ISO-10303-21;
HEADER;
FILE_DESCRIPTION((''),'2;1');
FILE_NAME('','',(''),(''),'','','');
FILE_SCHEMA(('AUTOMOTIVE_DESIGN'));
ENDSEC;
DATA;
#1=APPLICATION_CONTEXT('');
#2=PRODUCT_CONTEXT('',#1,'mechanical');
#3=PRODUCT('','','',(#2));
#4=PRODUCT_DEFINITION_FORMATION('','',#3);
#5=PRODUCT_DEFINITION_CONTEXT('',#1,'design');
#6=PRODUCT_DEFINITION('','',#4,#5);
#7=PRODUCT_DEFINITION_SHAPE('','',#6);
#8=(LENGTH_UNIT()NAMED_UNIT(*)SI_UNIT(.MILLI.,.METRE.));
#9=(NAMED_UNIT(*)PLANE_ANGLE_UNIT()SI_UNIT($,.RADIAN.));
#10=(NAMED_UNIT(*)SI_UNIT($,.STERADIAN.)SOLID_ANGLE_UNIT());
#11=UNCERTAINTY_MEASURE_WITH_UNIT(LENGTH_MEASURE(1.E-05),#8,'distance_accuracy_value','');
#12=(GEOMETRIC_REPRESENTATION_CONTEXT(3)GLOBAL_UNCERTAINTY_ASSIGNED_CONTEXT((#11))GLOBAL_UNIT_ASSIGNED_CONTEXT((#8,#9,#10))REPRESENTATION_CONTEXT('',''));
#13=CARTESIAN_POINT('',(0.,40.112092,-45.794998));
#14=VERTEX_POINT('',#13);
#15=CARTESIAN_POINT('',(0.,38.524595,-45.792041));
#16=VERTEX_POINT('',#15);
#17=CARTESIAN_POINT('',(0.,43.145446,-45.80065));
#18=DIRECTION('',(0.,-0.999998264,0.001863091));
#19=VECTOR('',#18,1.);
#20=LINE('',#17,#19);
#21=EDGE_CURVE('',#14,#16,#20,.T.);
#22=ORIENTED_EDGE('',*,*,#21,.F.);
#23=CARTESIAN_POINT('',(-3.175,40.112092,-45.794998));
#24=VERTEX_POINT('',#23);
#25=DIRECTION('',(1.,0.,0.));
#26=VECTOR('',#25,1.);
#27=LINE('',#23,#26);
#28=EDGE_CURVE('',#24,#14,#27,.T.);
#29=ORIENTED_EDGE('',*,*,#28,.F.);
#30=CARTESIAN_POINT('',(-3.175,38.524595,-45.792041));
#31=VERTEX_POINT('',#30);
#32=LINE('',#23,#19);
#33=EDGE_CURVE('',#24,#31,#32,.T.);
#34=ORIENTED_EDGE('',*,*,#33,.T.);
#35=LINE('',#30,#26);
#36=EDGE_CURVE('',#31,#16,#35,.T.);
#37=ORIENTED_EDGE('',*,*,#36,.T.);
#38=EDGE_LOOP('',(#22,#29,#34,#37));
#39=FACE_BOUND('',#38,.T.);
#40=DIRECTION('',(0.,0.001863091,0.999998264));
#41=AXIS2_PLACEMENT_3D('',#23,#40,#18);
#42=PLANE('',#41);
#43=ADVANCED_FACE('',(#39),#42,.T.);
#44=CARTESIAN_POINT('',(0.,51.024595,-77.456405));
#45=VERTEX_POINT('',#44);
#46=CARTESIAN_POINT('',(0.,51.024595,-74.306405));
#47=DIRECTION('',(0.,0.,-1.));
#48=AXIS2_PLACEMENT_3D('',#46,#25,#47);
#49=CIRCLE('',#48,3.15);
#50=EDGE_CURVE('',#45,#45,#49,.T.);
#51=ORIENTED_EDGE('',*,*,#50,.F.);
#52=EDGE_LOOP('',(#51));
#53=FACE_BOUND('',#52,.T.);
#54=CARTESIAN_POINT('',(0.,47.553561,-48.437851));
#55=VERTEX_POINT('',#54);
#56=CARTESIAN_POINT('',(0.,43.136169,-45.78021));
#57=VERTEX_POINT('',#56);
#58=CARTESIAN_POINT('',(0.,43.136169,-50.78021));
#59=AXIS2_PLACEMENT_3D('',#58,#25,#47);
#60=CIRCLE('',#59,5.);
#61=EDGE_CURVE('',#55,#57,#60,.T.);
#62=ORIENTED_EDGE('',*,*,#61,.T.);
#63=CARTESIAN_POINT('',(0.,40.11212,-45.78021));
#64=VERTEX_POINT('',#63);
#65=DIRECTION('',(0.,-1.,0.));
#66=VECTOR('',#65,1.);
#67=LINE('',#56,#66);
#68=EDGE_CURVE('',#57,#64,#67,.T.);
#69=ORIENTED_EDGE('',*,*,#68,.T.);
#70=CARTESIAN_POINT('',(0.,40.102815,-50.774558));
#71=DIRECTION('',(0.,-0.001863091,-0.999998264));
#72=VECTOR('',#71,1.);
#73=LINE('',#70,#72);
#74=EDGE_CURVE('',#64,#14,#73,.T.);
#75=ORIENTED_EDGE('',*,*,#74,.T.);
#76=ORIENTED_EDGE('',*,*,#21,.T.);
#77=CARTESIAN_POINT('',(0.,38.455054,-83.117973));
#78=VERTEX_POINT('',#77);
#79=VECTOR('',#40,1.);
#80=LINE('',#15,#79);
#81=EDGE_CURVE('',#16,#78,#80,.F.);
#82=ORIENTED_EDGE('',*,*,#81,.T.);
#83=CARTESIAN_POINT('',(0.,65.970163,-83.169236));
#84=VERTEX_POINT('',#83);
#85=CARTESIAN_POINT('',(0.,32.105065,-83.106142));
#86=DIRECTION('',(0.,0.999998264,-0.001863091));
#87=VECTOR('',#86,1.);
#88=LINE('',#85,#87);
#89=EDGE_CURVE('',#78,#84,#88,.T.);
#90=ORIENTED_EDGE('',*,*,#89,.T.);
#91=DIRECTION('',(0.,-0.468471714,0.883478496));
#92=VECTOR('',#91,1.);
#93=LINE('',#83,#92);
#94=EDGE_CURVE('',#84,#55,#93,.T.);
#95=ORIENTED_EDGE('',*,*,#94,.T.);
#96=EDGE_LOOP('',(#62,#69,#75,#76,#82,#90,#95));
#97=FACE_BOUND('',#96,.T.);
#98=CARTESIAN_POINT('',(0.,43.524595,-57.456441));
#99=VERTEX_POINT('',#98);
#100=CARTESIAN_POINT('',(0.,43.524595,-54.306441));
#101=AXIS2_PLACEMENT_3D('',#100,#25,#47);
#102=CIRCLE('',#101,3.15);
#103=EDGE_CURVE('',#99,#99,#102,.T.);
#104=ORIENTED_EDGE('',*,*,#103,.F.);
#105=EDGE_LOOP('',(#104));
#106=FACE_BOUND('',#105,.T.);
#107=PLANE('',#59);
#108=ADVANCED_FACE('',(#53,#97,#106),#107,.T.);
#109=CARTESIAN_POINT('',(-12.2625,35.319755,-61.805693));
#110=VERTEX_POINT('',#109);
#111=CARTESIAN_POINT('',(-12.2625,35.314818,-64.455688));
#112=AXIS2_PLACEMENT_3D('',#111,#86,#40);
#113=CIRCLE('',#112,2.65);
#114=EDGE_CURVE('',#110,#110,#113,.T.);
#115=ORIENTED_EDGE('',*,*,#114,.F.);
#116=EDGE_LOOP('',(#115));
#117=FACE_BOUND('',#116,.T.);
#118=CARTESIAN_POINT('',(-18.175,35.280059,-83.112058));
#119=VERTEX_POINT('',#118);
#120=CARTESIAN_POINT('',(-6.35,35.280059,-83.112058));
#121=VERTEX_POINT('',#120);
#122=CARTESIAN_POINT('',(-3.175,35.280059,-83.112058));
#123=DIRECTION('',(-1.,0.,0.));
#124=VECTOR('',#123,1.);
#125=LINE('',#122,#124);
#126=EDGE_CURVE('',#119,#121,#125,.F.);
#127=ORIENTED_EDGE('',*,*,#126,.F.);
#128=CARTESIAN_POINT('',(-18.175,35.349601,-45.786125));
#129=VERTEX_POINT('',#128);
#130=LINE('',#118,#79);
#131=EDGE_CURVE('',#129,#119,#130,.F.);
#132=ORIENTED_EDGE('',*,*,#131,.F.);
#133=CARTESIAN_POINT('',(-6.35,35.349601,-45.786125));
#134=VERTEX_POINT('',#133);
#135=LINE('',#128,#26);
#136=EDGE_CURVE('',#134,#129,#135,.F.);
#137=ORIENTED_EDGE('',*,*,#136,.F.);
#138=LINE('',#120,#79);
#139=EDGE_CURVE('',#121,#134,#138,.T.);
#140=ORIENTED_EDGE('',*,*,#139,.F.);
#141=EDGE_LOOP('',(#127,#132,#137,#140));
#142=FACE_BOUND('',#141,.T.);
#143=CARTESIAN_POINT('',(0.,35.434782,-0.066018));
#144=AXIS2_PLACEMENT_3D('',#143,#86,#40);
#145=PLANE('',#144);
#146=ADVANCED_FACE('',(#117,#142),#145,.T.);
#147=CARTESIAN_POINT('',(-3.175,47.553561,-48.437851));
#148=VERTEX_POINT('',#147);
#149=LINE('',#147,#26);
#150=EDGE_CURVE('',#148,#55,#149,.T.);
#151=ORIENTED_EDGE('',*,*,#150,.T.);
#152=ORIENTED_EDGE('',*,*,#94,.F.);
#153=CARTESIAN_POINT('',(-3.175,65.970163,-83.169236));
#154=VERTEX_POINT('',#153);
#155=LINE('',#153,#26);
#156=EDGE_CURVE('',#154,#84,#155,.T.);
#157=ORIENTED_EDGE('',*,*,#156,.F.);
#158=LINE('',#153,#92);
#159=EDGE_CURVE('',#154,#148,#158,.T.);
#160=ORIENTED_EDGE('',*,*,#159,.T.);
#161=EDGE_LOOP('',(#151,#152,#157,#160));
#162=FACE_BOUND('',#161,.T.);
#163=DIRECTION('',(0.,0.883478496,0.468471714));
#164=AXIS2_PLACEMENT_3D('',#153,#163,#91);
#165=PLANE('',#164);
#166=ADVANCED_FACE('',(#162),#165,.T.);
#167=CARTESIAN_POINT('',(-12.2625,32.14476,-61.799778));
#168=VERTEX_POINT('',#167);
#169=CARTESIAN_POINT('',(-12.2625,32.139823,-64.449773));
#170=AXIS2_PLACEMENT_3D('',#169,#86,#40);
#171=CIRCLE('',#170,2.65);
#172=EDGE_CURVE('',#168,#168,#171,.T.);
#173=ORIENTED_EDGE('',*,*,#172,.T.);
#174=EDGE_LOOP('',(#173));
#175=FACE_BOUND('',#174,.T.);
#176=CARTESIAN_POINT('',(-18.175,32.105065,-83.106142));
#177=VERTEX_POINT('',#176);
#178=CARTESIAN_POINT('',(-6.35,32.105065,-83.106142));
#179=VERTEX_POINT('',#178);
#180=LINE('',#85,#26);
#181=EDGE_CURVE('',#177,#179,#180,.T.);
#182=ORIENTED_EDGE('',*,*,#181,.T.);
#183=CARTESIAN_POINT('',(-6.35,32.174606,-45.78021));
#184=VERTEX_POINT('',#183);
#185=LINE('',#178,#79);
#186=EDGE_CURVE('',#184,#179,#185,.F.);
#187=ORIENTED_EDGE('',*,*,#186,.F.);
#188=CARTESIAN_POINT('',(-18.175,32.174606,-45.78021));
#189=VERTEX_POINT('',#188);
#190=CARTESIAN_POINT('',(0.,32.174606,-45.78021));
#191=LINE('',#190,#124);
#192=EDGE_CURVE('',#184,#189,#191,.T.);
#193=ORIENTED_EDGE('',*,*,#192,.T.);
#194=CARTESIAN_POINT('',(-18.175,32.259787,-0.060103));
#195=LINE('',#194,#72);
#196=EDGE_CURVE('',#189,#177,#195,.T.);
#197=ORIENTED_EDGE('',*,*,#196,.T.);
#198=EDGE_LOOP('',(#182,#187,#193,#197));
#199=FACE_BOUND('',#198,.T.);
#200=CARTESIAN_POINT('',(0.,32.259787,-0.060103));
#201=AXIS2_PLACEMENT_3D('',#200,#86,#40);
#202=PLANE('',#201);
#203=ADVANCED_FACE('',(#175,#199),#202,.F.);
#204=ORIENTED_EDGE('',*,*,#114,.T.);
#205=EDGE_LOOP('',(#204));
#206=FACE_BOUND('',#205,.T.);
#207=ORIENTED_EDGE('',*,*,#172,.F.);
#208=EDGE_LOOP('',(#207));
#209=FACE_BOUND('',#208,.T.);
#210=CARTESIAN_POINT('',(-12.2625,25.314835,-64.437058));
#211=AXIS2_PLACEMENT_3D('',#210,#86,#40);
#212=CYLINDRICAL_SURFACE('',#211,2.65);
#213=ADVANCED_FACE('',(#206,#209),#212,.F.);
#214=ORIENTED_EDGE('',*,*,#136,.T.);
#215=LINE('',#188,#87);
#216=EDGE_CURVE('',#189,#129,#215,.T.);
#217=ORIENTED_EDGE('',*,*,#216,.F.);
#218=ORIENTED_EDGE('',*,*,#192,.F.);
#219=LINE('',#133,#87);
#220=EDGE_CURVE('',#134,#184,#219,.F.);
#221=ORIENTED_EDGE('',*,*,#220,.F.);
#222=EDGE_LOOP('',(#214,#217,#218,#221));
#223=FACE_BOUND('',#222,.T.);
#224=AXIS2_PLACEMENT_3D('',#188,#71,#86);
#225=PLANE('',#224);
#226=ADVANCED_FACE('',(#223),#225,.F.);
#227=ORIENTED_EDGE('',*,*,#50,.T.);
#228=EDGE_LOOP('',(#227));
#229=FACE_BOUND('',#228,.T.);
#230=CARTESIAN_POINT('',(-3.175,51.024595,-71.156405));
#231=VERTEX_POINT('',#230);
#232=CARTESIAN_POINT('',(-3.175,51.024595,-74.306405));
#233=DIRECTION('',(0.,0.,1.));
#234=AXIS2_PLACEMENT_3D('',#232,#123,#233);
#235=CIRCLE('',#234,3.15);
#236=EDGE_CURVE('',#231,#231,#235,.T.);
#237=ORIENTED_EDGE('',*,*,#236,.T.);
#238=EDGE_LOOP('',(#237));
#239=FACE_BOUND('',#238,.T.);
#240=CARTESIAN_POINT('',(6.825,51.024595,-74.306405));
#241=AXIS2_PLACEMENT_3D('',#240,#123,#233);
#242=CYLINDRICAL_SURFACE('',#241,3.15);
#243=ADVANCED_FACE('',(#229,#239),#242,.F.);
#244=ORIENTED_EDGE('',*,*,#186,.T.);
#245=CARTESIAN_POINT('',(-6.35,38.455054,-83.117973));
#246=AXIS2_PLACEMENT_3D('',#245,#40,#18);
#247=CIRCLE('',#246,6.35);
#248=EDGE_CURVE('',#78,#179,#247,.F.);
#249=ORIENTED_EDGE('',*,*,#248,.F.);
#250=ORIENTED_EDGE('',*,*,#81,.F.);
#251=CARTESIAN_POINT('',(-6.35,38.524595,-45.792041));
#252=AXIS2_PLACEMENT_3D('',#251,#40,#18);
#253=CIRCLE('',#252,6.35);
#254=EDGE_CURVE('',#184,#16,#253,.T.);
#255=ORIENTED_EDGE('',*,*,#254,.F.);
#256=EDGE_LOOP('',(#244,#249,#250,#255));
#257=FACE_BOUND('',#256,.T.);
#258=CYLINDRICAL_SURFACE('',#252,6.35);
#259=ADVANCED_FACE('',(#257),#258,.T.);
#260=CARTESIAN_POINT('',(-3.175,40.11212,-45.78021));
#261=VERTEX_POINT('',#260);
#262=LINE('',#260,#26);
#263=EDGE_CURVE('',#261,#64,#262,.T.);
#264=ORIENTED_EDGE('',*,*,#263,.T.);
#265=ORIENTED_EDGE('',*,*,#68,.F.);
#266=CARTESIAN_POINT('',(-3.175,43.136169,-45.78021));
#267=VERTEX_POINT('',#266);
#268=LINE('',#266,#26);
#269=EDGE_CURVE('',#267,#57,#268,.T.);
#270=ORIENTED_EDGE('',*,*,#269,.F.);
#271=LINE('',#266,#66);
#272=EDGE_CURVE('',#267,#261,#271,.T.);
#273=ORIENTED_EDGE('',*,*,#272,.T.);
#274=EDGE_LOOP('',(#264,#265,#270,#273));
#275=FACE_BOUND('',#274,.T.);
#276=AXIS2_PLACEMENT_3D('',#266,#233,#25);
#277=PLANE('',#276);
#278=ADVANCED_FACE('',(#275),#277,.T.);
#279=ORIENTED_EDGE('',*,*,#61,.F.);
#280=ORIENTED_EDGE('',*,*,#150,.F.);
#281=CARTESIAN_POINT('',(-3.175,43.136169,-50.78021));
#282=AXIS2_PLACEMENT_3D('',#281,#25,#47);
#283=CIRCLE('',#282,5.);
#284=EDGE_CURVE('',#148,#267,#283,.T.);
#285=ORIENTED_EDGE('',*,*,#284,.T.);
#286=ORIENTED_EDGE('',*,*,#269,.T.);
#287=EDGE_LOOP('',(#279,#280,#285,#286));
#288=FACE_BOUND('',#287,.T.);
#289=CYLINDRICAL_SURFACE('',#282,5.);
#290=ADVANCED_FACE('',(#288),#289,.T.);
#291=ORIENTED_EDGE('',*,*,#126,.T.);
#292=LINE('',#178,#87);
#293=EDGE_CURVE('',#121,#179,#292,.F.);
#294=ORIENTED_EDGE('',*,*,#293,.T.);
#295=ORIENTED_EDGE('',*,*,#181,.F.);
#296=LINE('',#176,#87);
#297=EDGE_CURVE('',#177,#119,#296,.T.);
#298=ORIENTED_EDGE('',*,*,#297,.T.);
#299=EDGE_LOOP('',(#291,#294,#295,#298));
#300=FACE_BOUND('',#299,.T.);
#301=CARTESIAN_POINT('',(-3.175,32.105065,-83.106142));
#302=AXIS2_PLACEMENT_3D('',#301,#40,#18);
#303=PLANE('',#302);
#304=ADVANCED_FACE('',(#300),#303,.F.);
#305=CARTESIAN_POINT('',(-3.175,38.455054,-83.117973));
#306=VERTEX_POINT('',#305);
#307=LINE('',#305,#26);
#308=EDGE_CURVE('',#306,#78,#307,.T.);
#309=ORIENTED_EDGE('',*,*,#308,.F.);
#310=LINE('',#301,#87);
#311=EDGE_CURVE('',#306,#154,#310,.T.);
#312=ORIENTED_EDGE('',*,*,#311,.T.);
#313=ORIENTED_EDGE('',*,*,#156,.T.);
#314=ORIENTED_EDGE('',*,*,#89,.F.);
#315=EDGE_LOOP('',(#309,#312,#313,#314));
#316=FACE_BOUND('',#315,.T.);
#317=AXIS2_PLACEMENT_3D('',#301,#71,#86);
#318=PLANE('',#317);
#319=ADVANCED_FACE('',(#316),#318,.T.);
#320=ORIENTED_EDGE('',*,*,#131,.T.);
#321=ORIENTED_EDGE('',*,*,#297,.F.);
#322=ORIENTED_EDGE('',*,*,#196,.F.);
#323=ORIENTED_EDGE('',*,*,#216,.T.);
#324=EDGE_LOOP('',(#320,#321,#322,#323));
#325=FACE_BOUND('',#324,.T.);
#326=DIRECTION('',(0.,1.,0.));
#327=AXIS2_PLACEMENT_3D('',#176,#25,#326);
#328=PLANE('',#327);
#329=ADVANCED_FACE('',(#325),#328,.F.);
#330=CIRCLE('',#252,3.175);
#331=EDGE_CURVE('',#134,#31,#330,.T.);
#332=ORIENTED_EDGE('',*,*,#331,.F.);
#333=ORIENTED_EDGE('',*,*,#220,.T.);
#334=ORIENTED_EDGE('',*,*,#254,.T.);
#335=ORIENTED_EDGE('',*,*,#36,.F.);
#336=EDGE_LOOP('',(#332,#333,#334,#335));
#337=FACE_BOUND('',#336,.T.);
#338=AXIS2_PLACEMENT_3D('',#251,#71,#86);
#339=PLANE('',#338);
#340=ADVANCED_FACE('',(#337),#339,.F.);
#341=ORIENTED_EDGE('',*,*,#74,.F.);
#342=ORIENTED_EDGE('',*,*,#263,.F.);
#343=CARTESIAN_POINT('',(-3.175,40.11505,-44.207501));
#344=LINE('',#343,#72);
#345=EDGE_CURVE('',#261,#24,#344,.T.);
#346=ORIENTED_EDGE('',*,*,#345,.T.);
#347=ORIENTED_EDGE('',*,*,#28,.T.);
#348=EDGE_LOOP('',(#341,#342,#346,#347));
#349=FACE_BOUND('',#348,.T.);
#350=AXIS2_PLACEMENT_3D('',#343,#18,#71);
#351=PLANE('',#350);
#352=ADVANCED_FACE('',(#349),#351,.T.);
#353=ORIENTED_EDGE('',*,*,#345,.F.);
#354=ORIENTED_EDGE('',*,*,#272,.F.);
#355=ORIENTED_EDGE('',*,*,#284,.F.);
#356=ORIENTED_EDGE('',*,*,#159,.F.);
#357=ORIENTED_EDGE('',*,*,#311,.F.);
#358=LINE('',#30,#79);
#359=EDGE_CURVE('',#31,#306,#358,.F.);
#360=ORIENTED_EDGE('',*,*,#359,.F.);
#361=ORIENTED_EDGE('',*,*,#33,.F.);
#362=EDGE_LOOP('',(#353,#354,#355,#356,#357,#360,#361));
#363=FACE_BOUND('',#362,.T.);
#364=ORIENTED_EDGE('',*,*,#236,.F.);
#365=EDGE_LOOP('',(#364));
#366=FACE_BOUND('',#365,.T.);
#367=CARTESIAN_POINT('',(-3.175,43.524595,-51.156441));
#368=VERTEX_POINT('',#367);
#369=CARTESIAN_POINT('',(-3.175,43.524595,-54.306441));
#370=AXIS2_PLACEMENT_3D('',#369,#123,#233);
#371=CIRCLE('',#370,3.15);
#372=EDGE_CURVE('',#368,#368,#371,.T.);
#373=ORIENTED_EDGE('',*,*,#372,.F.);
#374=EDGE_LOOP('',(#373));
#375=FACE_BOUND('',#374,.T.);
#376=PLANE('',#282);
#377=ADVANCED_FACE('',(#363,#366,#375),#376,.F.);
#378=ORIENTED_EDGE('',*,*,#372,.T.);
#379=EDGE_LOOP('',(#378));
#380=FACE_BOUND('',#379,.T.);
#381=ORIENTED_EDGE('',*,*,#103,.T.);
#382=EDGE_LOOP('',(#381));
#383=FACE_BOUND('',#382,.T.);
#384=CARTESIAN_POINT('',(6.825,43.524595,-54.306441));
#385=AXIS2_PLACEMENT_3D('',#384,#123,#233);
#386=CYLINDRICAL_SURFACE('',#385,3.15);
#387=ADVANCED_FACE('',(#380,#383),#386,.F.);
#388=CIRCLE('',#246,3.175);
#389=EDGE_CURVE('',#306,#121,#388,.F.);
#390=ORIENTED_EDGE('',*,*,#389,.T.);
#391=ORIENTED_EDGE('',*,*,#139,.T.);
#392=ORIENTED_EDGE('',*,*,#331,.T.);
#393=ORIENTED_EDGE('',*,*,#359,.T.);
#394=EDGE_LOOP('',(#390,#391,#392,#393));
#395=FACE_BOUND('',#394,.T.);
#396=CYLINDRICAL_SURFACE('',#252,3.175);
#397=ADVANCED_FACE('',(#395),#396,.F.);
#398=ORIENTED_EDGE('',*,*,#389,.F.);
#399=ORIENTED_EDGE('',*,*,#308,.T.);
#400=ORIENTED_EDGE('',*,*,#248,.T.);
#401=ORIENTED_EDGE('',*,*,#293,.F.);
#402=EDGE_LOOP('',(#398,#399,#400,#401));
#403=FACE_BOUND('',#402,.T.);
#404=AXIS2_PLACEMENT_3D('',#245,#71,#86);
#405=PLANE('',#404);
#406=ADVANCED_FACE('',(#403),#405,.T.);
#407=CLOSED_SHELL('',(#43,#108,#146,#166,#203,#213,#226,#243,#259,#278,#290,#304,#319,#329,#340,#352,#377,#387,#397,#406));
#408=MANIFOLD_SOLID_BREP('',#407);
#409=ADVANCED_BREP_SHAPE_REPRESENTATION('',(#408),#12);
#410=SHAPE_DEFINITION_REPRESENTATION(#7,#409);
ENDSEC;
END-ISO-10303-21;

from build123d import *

# Parameters (mm, degrees)
BASE_FLANGE1_DEPTH            = 3.175
EDGE_FLANGE1_STRIP_W          = 19.05
EDGE_FLANGE1_STRIP_H          = 3.175
EDGE_FLANGE1_STRIP_CUT_DEPTH  = 37.325997284
EDGE_FLANGE1_RELIEF_W         = 20.6375
EDGE_FLANGE1_RELIEF_H         = 1.5875
EDGE_FLANGE1_RELIEF_CUT_DEPTH = 3.175
EDGE_FLANGE1_DEPTH            = 37.325997284
SKETCH15_R                    = 2.65
CUT_EXTRUDE2_DEPTH            = 10
SKETCH19_R                    = 3.15
CUT_EXTRUDE4_DEPTH            = 10


# Sheet-metal steps are written as plain solids
with BuildPart() as part:
    # Sketch3 → Base-Flange1 (new body)
    with BuildSketch(Plane(origin=(0, 0, 0), x_dir=(0, 0, -1), z_dir=(1, 0, 0))):
        with BuildLine():
            Line((83.106142408, 32.105064535), (45.780209905, 32.174606262))
            Line((45.780209905, 32.174606262), (45.780209905, 43.136168925))
            ThreePointArc((45.780209905, 43.136168925), (46.495831721, 45.713784796), (48.437851335, 47.553561406))
            Line((48.437851335, 47.553561406), (83.169236275, 65.970162941))
            Line((83.169236275, 65.970162941), (83.106142408, 32.105064535))
        make_face()
    extrude(amount=-BASE_FLANGE1_DEPTH)

    # Edge-Flange1 strip (across the edge) → Edge-Flange1 strip cut (cut)
    with BuildSketch(Plane(origin=(-3.175, 32.105064535, -83.106142408), x_dir=(-3.4914813388431334e-15, 0.999998264444559, -0.001863090945206598), z_dir=(0, 0.001863090945206598, 0.999998264444559))):
        with Locations((-3.175, -1.5875)):
            Rectangle(EDGE_FLANGE1_STRIP_W, EDGE_FLANGE1_STRIP_H)
    extrude(amount=EDGE_FLANGE1_STRIP_CUT_DEPTH, mode=Mode.SUBTRACT)

    # Edge-Flange1 relief (on the sheet) → Edge-Flange1 relief cut (cut)
    with BuildSketch(Plane(origin=(-3.175, 38.455053514, -83.117973035), x_dir=(-6.982962677686267e-15, 0.999998264444559, -0.001863090945206598), z_dir=(-1, 0, 0))):
        with Locations((-8.73125, -38.119747284)):
            Rectangle(EDGE_FLANGE1_RELIEF_W, EDGE_FLANGE1_RELIEF_H)
    extrude(amount=-EDGE_FLANGE1_RELIEF_CUT_DEPTH, mode=Mode.SUBTRACT)

    # Edge-Flange1 section (across the edge) → Edge-Flange1 (add)
    with BuildSketch(Plane(origin=(-3.175, 32.105064535, -83.106142408), x_dir=(-3.4914813388431334e-15, 0.999998264444559, -0.001863090945206598), z_dir=(0, 0.001863090945206598, 0.999998264444559))):
        with BuildLine():
            Line((0, 3.175), (0, 15))
            Line((0, 15), (3.175, 15))
            Line((3.175, 15), (3.175, 3.175))
            ThreePointArc((3.175, 3.175), (4.10493597, 0.92993597), (6.35, 0))
            Line((6.35, 0), (6.35, -3.175))
            ThreePointArc((6.35, -3.175), (1.859871939, -1.315128061), (0, 3.175))
        make_face()
    extrude(amount=EDGE_FLANGE1_DEPTH)

    # Sketch15 → Cut-Extrude2 (cut)
    with BuildSketch(Plane(origin=(0, 35.434781617, -0.066018335), x_dir=(1, 0, 0), z_dir=(-3.23986857388729e-15, 0.999998264444559, -0.0018630909452065992))):
        with Locations(Location((-12.2625, 64.389781839, 0), (0, 0, 270))):
            Circle(SKETCH15_R)
    extrude(amount=-CUT_EXTRUDE2_DEPTH, mode=Mode.SUBTRACT)

    # Sketch19 → Cut-Extrude4 (cut)
    with BuildSketch(Plane.ZY.offset(3.175)):
        with Locations((-74.30640548, 51.024595242)):
            Circle(SKETCH19_R)
        with Locations((-54.306440614, 43.524595242)):
            Circle(SKETCH19_R)
    extrude(amount=-CUT_EXTRUDE4_DEPTH, mode=Mode.SUBTRACT)


solid = part.part
